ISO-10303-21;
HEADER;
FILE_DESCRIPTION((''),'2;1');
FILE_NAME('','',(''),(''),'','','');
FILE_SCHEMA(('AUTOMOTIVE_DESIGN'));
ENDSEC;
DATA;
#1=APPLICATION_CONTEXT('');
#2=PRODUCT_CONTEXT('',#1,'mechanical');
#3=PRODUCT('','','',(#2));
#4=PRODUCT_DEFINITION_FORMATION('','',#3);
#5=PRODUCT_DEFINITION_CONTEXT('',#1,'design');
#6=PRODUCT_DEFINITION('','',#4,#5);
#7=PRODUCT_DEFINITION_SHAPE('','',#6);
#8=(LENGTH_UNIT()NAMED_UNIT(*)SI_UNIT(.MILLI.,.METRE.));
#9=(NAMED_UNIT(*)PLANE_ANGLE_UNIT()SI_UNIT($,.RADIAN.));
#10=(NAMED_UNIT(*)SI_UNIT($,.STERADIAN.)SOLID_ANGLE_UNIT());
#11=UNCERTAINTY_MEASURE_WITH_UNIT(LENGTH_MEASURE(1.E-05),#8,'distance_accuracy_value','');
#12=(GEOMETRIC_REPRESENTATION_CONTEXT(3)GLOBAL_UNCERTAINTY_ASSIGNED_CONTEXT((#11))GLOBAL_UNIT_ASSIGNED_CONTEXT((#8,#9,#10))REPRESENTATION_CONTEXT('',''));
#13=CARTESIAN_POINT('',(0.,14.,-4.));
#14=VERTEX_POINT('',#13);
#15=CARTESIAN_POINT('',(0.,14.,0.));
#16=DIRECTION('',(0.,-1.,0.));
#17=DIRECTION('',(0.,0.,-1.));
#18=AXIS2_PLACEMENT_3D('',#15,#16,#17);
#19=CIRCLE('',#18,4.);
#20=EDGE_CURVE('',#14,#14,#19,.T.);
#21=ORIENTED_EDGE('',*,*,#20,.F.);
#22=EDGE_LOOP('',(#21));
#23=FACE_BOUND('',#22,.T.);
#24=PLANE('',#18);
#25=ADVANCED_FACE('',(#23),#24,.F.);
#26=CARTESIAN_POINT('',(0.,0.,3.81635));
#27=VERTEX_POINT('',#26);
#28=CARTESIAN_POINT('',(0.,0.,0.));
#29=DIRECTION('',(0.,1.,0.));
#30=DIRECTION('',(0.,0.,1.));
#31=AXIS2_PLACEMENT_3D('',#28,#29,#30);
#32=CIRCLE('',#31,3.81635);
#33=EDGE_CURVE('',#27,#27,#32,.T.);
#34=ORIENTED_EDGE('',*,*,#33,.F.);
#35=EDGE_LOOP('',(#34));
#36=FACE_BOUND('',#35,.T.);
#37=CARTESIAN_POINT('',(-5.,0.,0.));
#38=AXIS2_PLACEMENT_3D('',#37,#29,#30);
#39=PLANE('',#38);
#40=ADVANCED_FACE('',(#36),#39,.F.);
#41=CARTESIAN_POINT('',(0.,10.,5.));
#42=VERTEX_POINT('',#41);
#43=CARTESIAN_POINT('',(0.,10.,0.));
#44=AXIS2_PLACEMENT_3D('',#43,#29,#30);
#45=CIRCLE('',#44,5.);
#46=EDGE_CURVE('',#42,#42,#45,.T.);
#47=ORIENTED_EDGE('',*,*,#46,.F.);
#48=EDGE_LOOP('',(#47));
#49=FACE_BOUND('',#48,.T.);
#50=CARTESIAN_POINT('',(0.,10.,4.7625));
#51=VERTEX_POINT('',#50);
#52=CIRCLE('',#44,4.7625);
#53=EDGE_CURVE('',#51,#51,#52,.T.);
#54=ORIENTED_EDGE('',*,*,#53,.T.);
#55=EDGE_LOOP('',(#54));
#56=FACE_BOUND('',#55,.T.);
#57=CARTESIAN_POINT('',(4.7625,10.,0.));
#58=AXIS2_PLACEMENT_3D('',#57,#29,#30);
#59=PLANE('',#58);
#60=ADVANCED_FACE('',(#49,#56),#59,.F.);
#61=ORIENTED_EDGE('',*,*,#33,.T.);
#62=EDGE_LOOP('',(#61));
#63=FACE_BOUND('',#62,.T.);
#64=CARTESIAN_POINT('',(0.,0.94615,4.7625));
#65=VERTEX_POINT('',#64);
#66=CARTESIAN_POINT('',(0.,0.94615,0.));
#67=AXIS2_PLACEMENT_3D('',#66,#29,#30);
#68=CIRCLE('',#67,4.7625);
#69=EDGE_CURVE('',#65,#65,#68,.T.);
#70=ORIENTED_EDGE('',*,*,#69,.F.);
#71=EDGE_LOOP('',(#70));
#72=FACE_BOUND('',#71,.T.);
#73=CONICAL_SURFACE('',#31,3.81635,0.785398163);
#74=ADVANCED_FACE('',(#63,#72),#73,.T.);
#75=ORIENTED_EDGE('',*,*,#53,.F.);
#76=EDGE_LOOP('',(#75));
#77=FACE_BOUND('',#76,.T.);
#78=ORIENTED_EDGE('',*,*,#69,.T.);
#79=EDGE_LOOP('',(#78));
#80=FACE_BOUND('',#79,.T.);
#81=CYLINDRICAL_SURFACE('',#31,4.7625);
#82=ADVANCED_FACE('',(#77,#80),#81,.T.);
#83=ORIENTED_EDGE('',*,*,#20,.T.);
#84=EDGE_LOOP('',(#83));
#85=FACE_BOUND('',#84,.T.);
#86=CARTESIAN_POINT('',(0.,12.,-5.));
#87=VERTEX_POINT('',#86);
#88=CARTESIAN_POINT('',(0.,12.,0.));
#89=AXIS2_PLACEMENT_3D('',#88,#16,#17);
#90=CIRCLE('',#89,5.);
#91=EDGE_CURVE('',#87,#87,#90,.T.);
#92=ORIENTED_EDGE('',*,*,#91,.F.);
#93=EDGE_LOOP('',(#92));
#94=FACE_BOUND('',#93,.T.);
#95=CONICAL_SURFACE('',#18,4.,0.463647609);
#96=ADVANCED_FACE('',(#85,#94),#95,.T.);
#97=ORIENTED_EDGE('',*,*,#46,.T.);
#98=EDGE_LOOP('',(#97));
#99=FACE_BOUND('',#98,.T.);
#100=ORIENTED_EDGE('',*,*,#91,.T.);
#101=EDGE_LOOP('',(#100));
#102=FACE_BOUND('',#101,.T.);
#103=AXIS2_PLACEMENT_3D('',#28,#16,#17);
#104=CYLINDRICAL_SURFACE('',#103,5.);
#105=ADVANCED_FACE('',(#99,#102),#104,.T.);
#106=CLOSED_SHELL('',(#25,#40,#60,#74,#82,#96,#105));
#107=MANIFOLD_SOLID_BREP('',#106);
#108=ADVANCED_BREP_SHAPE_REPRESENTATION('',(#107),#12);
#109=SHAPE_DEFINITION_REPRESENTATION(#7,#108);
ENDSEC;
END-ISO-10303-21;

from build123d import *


# Read off the part's stored shape, not the designer's step: 3/8-16 机械螺纹 螺柱1
with BuildPart() as part:
    # 草图1 → 旋转3 (revolve)
    with BuildSketch(Plane.XY, mode=Mode.PRIVATE) as revolve_3_sk:
        Polygon((0, 0), (0, 14), (-4, 14), (-5, 12), (-5, 0), align=None)
    revolve(revolve_3_sk.sketch.rotate(Axis((0, 0, 0), (0, 1, 0)), 270), axis=Axis((0, 0, 0), (0, 1, 0)))

    # 3/8-16 机械螺纹 螺柱1 outline → 3/8-16 机械螺纹 螺柱1 (revolve, cut)
    with BuildSketch(Plane.XY):
        Polygon((3.81635, 0), (5, 0), (5, 10), (4.7625, 10), (4.7625, 0.94615), align=None)
    revolve(axis=Axis((0, 0, 0), (0, 1, 0)), mode=Mode.SUBTRACT)


solid = part.part
